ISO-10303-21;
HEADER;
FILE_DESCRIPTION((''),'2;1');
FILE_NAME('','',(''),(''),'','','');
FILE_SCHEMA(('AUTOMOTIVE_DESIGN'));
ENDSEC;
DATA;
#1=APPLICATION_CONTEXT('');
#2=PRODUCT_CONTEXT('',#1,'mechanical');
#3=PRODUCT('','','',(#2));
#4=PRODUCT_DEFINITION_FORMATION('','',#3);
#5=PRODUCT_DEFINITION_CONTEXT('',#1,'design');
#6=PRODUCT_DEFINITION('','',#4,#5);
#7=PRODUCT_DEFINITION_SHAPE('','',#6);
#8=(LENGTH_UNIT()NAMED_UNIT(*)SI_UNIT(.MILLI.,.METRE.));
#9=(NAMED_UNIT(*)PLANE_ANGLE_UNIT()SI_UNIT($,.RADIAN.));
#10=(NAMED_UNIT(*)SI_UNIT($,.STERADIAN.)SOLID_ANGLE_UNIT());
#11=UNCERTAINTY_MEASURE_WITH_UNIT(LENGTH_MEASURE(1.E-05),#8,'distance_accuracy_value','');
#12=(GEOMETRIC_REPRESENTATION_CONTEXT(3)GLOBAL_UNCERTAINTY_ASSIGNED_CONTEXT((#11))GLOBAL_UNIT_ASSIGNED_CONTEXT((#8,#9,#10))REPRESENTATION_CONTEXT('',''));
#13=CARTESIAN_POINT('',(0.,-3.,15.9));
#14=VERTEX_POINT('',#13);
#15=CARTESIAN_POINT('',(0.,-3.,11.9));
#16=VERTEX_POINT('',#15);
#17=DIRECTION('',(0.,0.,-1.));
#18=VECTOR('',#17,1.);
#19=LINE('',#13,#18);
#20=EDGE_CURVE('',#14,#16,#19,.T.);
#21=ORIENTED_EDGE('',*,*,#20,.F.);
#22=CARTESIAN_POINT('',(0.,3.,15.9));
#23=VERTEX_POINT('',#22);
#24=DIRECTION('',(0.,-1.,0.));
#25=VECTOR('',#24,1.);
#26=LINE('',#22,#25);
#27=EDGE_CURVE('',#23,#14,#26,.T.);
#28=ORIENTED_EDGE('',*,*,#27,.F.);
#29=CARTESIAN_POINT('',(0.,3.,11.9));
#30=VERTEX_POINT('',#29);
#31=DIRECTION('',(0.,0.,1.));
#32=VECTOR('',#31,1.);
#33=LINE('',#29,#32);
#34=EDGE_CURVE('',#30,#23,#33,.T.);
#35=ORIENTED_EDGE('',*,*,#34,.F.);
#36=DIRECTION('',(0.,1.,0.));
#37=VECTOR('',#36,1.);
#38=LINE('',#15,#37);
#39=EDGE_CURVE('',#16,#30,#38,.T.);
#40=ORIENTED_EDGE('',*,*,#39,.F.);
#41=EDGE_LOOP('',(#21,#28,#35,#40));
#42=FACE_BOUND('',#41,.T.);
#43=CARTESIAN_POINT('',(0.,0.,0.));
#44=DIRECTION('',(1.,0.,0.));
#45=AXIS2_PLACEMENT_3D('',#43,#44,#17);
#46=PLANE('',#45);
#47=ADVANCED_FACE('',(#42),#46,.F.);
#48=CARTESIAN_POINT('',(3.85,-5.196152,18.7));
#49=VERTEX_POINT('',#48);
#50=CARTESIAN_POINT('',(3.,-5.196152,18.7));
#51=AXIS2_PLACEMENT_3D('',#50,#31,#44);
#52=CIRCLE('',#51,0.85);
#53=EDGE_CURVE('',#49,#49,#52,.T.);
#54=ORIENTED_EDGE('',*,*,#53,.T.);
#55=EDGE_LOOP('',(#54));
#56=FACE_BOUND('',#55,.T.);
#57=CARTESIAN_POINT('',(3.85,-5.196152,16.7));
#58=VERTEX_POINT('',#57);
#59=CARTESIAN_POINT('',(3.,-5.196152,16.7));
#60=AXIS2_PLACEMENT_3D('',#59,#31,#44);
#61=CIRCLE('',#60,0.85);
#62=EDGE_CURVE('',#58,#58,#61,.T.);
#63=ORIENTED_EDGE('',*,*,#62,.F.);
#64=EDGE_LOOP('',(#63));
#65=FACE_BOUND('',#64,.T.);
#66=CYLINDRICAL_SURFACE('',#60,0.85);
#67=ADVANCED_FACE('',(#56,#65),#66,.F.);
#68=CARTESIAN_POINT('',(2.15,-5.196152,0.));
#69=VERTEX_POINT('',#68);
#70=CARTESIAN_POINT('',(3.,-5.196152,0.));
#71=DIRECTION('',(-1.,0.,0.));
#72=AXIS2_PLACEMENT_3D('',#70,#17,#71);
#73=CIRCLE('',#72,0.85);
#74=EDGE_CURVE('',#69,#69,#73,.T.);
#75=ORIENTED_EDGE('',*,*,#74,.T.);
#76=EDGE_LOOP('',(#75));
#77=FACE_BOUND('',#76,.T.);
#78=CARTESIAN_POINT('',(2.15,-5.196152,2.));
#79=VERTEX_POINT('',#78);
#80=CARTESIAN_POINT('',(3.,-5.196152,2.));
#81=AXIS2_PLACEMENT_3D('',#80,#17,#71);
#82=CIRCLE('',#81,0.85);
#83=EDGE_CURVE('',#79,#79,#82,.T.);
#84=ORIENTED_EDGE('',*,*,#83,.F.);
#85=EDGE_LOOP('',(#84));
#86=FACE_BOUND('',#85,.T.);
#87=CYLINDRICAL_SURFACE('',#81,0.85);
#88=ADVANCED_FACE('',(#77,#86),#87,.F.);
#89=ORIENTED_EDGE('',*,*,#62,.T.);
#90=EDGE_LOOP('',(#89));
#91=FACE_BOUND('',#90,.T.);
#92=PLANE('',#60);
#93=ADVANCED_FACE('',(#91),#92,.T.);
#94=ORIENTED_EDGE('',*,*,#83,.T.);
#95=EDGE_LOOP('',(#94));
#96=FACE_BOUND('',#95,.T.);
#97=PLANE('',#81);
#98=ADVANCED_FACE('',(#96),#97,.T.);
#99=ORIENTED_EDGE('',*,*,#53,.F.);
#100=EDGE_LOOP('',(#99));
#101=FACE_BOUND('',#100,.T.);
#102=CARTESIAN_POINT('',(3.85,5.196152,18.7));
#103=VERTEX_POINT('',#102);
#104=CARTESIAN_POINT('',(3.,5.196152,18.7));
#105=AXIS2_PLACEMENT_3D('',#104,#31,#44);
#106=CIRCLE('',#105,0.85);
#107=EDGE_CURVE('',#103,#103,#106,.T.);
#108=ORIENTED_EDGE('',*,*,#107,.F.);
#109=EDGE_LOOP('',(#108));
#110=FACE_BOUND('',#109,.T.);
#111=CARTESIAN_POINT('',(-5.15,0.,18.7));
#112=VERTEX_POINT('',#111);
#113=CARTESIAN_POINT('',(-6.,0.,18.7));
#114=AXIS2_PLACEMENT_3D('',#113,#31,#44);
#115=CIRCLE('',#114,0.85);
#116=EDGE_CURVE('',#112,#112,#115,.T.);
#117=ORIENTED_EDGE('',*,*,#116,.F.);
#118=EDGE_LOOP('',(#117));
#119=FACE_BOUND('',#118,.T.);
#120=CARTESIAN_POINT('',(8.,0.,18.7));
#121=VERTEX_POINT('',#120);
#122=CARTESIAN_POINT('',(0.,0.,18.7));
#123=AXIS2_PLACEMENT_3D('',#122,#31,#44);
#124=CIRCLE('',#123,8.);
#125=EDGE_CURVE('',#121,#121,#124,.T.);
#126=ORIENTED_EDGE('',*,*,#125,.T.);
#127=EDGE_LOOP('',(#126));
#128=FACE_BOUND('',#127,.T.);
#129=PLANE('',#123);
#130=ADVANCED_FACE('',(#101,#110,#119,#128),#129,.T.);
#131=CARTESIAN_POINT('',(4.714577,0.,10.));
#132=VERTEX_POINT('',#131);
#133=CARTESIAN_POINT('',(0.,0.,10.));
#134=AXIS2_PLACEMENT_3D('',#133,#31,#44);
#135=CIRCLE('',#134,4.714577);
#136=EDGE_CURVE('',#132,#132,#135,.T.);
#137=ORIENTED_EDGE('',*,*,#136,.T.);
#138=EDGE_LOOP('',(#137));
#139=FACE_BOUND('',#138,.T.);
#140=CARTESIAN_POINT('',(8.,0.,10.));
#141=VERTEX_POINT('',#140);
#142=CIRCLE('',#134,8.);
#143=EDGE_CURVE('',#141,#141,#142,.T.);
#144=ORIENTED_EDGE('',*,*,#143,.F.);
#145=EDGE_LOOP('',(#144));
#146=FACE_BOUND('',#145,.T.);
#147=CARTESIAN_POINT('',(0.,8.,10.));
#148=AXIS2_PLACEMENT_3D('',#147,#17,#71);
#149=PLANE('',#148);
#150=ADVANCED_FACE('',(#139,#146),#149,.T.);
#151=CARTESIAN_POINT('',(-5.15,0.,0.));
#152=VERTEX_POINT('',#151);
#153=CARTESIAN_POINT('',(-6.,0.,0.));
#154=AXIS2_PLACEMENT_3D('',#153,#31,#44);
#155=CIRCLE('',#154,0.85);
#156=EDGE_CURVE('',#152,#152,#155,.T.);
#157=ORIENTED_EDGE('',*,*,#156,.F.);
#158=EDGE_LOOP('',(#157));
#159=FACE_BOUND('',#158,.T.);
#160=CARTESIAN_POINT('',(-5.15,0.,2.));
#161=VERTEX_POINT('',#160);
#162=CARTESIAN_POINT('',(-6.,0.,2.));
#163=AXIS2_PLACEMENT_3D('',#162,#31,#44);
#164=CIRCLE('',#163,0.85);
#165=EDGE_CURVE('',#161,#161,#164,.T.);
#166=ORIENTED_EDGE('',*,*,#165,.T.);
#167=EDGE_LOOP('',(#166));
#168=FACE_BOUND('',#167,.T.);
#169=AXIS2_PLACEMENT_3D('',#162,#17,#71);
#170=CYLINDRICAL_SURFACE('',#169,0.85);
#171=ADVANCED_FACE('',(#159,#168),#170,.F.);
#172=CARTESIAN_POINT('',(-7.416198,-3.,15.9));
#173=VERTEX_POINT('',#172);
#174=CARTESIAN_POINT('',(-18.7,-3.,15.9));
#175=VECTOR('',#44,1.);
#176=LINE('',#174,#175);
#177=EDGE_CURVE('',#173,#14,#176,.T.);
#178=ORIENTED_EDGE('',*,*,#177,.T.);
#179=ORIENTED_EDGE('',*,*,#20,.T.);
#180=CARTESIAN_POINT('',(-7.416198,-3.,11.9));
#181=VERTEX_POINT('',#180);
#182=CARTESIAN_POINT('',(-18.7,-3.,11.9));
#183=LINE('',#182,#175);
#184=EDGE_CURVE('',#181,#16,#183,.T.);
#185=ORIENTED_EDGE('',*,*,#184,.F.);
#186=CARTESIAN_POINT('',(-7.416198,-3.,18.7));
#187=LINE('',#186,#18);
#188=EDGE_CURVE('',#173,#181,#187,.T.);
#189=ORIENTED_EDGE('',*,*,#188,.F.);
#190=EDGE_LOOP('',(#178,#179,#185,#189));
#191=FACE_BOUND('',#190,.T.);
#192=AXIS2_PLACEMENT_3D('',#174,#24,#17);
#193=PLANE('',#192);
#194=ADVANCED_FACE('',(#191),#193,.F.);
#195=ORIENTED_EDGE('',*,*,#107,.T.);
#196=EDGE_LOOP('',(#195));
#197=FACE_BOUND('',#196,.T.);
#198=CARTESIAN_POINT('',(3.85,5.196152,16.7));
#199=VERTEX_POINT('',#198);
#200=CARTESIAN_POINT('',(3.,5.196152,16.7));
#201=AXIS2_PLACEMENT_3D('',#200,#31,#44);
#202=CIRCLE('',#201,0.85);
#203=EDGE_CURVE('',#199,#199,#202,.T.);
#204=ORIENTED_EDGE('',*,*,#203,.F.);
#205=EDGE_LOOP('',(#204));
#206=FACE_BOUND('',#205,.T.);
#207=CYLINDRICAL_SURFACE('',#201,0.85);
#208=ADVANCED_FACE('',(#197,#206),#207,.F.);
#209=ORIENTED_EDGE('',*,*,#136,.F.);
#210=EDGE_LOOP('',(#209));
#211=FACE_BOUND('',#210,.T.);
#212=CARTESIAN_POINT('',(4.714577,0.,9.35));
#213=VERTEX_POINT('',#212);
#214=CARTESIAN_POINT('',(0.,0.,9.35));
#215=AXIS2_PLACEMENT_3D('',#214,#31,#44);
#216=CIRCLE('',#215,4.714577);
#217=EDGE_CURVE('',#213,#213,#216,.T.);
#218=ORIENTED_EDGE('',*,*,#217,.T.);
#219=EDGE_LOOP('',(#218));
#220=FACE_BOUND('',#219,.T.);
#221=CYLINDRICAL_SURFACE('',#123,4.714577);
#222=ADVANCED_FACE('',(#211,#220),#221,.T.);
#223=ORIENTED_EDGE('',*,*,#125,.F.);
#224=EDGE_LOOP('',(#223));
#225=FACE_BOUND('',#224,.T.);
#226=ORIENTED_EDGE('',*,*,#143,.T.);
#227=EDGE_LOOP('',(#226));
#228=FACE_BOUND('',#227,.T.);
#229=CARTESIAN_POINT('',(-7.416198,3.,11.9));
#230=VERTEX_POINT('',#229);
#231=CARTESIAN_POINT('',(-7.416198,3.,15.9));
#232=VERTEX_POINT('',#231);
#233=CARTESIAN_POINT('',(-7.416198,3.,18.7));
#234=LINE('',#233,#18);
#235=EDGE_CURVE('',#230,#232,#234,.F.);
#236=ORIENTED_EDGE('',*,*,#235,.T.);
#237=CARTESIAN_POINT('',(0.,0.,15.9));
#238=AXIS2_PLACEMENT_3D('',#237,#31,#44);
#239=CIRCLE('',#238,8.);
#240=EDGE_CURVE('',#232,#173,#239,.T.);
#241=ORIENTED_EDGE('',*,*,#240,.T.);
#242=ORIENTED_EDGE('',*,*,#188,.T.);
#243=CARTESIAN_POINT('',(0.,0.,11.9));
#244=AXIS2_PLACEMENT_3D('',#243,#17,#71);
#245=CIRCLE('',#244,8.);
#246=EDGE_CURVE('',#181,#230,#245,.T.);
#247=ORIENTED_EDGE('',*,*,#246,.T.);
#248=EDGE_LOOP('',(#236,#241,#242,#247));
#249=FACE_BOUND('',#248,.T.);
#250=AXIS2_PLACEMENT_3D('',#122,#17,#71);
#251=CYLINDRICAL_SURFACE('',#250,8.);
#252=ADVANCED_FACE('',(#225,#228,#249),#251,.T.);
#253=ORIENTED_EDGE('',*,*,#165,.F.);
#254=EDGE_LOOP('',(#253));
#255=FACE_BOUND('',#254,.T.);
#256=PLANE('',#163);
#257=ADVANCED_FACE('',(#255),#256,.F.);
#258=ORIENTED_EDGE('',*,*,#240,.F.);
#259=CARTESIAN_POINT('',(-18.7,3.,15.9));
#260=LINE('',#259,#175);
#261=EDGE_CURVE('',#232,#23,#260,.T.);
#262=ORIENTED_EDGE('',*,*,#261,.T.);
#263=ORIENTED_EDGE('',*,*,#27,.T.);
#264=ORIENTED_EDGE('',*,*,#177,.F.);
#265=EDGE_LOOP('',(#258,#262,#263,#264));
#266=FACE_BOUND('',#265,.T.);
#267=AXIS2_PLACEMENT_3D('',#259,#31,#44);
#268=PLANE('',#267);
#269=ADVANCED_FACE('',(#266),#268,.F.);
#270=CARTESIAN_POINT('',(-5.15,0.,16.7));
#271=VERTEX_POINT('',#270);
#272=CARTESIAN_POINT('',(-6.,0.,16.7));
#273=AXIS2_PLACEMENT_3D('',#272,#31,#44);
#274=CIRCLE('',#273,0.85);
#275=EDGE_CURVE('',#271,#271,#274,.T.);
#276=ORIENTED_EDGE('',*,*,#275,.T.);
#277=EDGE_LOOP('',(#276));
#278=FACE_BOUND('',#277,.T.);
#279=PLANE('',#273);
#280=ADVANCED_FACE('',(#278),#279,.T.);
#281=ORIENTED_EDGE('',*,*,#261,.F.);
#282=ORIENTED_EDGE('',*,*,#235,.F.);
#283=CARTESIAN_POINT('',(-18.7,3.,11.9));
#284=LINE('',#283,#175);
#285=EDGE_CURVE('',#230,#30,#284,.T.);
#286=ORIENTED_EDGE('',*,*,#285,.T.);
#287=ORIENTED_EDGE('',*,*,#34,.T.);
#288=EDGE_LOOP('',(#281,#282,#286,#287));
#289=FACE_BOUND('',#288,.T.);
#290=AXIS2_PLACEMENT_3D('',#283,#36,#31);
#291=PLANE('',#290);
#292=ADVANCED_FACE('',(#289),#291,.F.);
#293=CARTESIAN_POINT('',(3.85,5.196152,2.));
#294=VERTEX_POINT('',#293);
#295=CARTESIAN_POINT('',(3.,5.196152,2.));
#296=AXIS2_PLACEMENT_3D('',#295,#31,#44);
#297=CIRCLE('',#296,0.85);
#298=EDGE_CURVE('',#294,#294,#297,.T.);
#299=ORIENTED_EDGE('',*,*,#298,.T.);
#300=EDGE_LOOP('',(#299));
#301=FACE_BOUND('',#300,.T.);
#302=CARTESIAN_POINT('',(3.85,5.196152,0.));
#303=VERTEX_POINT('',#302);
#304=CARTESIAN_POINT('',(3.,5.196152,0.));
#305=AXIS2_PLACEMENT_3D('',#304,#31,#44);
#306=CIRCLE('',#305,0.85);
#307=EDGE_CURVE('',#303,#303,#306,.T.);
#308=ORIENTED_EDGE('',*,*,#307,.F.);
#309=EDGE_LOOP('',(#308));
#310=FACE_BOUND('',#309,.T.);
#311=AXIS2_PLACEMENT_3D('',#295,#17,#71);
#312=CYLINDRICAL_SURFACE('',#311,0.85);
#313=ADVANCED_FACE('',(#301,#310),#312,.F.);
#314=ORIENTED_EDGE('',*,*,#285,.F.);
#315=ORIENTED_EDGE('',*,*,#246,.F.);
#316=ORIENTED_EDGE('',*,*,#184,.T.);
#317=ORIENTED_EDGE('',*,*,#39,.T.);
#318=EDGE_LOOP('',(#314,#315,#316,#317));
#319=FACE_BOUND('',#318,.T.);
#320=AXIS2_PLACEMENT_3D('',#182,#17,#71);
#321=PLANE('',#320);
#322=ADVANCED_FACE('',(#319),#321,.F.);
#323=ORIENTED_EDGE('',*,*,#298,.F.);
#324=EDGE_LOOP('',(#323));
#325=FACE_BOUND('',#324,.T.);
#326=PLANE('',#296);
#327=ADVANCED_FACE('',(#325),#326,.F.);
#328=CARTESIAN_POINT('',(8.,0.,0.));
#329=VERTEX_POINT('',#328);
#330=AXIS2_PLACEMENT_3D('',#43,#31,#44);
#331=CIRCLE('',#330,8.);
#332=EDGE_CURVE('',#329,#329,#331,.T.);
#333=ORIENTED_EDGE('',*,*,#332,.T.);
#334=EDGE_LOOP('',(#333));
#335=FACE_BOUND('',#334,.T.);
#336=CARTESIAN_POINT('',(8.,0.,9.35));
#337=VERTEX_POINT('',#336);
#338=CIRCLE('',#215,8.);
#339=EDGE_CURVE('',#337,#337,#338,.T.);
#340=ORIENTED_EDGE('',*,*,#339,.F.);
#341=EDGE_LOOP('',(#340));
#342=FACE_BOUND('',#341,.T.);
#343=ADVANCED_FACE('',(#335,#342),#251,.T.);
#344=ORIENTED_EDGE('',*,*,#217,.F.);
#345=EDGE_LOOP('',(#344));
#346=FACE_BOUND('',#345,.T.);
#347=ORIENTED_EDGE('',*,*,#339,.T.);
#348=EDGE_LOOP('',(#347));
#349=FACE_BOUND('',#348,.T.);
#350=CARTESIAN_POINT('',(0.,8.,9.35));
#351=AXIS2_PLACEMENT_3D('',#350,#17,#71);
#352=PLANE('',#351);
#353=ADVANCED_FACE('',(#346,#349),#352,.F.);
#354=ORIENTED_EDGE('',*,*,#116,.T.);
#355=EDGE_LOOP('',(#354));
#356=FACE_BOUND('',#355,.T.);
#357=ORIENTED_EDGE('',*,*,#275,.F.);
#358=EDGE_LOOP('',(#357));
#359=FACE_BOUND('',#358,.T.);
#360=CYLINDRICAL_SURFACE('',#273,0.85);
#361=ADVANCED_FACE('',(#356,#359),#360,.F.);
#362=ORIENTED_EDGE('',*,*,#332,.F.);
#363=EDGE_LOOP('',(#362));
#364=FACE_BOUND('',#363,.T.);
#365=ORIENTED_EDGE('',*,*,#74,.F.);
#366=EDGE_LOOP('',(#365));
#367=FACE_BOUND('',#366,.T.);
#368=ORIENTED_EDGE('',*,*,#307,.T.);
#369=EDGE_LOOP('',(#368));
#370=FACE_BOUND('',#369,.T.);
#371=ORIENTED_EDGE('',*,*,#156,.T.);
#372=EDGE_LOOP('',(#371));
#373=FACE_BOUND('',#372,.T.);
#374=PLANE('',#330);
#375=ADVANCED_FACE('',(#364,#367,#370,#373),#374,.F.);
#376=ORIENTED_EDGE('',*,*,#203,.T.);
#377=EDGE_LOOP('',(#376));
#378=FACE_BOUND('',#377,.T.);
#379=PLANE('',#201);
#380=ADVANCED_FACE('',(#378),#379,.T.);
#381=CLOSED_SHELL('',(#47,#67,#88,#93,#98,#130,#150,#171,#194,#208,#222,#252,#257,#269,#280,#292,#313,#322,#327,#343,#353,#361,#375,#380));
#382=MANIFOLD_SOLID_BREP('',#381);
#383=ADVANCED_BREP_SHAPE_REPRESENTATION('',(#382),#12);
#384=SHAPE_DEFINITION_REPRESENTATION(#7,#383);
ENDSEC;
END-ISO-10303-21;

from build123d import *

# Parameters (mm, degrees)
SKETCH_1_R          = 8
EXTRUDE_1_DEPTH     = 18.7
SKETCH_2_W          = 4
SKETCH_2_H          = 6
CUT_EXTRUDE_1_DEPTH = 18.7
OTHER_START         = 9.35
OTHER_4_OUTLINE_R   = 8
OTHER_4_OUTLINE_R_2 = 4.714576893
OTHER_4_DEPTH       = 0.65
SKETCH_1_3_R        = 0.85
CUT_EXTRUDE_2_DEPTH = 2
CUT_EXTRUDE_START   = 16.7
SKETCH_1_4_R        = 0.85
CUT_EXTRUDE_3_DEPTH = 2
SKETCH_1_6_R        = 0.85
CUT_EXTRUDE_4_DEPTH = 2
SKETCH_1_7_R        = 0.85
CUT_EXTRUDE_5_DEPTH = 2


# Read off the part's stored shape, not the designer's step: 切除-旋转-薄壁4
with BuildPart() as part:
    # 草图1 → 凸台-拉伸1 (new body)
    with BuildSketch(Plane.XY):
        Circle(SKETCH_1_R)
    extrude(amount=EXTRUDE_1_DEPTH)

    # 草图2 → 切除-拉伸1 (cut)
    with BuildSketch(Plane(origin=(0, 0, 0), x_dir=(0, 0, -1), z_dir=(1, 0, 0))):
        with Locations((-13.9, 0)):
            Rectangle(SKETCH_2_W, SKETCH_2_H)
    extrude(amount=-CUT_EXTRUDE_1_DEPTH, mode=Mode.SUBTRACT)

    # 切除-旋转-薄壁4 outline → 切除-旋转-薄壁4 (cut)
    with BuildSketch(Plane.XY.offset(OTHER_START)):
        Circle(OTHER_4_OUTLINE_R)
        Circle(OTHER_4_OUTLINE_R_2, mode=Mode.SUBTRACT)
    extrude(amount=OTHER_4_DEPTH, mode=Mode.SUBTRACT)

    # 草图1<3> → 切除-拉伸2 (cut)
    with BuildSketch(Plane.XY):
        with Locations((-6, 0)):
            Circle(SKETCH_1_3_R)
        with Locations((3, 5.196152423)):
            Circle(SKETCH_1_3_R)
    extrude(amount=CUT_EXTRUDE_2_DEPTH, mode=Mode.SUBTRACT)

    # 草图1<4> → 切除-拉伸3 (cut)
    with BuildSketch(Plane.XY.offset(CUT_EXTRUDE_START)):
        with Locations((-6, 0)):
            Circle(SKETCH_1_4_R)
        with Locations((3, 5.196152423)):
            Circle(SKETCH_1_4_R)
    extrude(amount=CUT_EXTRUDE_3_DEPTH, mode=Mode.SUBTRACT)

    # 草图1<6> → 切除-拉伸4 (cut)
    with BuildSketch(Plane.XY):
        with Locations(Location((3, -5.196152423, 0), (0, 0, 180))):
            Circle(SKETCH_1_6_R)
    extrude(amount=CUT_EXTRUDE_4_DEPTH, mode=Mode.SUBTRACT)

    # 草图1<7> → 切除-拉伸5 (cut)
    with BuildSketch(Plane.XY.offset(CUT_EXTRUDE_START)):
        with Locations(Location((3, -5.196152423, 0), (0, 0, 180))):
            Circle(SKETCH_1_7_R)
    extrude(amount=CUT_EXTRUDE_5_DEPTH, mode=Mode.SUBTRACT)


solid = part.part
